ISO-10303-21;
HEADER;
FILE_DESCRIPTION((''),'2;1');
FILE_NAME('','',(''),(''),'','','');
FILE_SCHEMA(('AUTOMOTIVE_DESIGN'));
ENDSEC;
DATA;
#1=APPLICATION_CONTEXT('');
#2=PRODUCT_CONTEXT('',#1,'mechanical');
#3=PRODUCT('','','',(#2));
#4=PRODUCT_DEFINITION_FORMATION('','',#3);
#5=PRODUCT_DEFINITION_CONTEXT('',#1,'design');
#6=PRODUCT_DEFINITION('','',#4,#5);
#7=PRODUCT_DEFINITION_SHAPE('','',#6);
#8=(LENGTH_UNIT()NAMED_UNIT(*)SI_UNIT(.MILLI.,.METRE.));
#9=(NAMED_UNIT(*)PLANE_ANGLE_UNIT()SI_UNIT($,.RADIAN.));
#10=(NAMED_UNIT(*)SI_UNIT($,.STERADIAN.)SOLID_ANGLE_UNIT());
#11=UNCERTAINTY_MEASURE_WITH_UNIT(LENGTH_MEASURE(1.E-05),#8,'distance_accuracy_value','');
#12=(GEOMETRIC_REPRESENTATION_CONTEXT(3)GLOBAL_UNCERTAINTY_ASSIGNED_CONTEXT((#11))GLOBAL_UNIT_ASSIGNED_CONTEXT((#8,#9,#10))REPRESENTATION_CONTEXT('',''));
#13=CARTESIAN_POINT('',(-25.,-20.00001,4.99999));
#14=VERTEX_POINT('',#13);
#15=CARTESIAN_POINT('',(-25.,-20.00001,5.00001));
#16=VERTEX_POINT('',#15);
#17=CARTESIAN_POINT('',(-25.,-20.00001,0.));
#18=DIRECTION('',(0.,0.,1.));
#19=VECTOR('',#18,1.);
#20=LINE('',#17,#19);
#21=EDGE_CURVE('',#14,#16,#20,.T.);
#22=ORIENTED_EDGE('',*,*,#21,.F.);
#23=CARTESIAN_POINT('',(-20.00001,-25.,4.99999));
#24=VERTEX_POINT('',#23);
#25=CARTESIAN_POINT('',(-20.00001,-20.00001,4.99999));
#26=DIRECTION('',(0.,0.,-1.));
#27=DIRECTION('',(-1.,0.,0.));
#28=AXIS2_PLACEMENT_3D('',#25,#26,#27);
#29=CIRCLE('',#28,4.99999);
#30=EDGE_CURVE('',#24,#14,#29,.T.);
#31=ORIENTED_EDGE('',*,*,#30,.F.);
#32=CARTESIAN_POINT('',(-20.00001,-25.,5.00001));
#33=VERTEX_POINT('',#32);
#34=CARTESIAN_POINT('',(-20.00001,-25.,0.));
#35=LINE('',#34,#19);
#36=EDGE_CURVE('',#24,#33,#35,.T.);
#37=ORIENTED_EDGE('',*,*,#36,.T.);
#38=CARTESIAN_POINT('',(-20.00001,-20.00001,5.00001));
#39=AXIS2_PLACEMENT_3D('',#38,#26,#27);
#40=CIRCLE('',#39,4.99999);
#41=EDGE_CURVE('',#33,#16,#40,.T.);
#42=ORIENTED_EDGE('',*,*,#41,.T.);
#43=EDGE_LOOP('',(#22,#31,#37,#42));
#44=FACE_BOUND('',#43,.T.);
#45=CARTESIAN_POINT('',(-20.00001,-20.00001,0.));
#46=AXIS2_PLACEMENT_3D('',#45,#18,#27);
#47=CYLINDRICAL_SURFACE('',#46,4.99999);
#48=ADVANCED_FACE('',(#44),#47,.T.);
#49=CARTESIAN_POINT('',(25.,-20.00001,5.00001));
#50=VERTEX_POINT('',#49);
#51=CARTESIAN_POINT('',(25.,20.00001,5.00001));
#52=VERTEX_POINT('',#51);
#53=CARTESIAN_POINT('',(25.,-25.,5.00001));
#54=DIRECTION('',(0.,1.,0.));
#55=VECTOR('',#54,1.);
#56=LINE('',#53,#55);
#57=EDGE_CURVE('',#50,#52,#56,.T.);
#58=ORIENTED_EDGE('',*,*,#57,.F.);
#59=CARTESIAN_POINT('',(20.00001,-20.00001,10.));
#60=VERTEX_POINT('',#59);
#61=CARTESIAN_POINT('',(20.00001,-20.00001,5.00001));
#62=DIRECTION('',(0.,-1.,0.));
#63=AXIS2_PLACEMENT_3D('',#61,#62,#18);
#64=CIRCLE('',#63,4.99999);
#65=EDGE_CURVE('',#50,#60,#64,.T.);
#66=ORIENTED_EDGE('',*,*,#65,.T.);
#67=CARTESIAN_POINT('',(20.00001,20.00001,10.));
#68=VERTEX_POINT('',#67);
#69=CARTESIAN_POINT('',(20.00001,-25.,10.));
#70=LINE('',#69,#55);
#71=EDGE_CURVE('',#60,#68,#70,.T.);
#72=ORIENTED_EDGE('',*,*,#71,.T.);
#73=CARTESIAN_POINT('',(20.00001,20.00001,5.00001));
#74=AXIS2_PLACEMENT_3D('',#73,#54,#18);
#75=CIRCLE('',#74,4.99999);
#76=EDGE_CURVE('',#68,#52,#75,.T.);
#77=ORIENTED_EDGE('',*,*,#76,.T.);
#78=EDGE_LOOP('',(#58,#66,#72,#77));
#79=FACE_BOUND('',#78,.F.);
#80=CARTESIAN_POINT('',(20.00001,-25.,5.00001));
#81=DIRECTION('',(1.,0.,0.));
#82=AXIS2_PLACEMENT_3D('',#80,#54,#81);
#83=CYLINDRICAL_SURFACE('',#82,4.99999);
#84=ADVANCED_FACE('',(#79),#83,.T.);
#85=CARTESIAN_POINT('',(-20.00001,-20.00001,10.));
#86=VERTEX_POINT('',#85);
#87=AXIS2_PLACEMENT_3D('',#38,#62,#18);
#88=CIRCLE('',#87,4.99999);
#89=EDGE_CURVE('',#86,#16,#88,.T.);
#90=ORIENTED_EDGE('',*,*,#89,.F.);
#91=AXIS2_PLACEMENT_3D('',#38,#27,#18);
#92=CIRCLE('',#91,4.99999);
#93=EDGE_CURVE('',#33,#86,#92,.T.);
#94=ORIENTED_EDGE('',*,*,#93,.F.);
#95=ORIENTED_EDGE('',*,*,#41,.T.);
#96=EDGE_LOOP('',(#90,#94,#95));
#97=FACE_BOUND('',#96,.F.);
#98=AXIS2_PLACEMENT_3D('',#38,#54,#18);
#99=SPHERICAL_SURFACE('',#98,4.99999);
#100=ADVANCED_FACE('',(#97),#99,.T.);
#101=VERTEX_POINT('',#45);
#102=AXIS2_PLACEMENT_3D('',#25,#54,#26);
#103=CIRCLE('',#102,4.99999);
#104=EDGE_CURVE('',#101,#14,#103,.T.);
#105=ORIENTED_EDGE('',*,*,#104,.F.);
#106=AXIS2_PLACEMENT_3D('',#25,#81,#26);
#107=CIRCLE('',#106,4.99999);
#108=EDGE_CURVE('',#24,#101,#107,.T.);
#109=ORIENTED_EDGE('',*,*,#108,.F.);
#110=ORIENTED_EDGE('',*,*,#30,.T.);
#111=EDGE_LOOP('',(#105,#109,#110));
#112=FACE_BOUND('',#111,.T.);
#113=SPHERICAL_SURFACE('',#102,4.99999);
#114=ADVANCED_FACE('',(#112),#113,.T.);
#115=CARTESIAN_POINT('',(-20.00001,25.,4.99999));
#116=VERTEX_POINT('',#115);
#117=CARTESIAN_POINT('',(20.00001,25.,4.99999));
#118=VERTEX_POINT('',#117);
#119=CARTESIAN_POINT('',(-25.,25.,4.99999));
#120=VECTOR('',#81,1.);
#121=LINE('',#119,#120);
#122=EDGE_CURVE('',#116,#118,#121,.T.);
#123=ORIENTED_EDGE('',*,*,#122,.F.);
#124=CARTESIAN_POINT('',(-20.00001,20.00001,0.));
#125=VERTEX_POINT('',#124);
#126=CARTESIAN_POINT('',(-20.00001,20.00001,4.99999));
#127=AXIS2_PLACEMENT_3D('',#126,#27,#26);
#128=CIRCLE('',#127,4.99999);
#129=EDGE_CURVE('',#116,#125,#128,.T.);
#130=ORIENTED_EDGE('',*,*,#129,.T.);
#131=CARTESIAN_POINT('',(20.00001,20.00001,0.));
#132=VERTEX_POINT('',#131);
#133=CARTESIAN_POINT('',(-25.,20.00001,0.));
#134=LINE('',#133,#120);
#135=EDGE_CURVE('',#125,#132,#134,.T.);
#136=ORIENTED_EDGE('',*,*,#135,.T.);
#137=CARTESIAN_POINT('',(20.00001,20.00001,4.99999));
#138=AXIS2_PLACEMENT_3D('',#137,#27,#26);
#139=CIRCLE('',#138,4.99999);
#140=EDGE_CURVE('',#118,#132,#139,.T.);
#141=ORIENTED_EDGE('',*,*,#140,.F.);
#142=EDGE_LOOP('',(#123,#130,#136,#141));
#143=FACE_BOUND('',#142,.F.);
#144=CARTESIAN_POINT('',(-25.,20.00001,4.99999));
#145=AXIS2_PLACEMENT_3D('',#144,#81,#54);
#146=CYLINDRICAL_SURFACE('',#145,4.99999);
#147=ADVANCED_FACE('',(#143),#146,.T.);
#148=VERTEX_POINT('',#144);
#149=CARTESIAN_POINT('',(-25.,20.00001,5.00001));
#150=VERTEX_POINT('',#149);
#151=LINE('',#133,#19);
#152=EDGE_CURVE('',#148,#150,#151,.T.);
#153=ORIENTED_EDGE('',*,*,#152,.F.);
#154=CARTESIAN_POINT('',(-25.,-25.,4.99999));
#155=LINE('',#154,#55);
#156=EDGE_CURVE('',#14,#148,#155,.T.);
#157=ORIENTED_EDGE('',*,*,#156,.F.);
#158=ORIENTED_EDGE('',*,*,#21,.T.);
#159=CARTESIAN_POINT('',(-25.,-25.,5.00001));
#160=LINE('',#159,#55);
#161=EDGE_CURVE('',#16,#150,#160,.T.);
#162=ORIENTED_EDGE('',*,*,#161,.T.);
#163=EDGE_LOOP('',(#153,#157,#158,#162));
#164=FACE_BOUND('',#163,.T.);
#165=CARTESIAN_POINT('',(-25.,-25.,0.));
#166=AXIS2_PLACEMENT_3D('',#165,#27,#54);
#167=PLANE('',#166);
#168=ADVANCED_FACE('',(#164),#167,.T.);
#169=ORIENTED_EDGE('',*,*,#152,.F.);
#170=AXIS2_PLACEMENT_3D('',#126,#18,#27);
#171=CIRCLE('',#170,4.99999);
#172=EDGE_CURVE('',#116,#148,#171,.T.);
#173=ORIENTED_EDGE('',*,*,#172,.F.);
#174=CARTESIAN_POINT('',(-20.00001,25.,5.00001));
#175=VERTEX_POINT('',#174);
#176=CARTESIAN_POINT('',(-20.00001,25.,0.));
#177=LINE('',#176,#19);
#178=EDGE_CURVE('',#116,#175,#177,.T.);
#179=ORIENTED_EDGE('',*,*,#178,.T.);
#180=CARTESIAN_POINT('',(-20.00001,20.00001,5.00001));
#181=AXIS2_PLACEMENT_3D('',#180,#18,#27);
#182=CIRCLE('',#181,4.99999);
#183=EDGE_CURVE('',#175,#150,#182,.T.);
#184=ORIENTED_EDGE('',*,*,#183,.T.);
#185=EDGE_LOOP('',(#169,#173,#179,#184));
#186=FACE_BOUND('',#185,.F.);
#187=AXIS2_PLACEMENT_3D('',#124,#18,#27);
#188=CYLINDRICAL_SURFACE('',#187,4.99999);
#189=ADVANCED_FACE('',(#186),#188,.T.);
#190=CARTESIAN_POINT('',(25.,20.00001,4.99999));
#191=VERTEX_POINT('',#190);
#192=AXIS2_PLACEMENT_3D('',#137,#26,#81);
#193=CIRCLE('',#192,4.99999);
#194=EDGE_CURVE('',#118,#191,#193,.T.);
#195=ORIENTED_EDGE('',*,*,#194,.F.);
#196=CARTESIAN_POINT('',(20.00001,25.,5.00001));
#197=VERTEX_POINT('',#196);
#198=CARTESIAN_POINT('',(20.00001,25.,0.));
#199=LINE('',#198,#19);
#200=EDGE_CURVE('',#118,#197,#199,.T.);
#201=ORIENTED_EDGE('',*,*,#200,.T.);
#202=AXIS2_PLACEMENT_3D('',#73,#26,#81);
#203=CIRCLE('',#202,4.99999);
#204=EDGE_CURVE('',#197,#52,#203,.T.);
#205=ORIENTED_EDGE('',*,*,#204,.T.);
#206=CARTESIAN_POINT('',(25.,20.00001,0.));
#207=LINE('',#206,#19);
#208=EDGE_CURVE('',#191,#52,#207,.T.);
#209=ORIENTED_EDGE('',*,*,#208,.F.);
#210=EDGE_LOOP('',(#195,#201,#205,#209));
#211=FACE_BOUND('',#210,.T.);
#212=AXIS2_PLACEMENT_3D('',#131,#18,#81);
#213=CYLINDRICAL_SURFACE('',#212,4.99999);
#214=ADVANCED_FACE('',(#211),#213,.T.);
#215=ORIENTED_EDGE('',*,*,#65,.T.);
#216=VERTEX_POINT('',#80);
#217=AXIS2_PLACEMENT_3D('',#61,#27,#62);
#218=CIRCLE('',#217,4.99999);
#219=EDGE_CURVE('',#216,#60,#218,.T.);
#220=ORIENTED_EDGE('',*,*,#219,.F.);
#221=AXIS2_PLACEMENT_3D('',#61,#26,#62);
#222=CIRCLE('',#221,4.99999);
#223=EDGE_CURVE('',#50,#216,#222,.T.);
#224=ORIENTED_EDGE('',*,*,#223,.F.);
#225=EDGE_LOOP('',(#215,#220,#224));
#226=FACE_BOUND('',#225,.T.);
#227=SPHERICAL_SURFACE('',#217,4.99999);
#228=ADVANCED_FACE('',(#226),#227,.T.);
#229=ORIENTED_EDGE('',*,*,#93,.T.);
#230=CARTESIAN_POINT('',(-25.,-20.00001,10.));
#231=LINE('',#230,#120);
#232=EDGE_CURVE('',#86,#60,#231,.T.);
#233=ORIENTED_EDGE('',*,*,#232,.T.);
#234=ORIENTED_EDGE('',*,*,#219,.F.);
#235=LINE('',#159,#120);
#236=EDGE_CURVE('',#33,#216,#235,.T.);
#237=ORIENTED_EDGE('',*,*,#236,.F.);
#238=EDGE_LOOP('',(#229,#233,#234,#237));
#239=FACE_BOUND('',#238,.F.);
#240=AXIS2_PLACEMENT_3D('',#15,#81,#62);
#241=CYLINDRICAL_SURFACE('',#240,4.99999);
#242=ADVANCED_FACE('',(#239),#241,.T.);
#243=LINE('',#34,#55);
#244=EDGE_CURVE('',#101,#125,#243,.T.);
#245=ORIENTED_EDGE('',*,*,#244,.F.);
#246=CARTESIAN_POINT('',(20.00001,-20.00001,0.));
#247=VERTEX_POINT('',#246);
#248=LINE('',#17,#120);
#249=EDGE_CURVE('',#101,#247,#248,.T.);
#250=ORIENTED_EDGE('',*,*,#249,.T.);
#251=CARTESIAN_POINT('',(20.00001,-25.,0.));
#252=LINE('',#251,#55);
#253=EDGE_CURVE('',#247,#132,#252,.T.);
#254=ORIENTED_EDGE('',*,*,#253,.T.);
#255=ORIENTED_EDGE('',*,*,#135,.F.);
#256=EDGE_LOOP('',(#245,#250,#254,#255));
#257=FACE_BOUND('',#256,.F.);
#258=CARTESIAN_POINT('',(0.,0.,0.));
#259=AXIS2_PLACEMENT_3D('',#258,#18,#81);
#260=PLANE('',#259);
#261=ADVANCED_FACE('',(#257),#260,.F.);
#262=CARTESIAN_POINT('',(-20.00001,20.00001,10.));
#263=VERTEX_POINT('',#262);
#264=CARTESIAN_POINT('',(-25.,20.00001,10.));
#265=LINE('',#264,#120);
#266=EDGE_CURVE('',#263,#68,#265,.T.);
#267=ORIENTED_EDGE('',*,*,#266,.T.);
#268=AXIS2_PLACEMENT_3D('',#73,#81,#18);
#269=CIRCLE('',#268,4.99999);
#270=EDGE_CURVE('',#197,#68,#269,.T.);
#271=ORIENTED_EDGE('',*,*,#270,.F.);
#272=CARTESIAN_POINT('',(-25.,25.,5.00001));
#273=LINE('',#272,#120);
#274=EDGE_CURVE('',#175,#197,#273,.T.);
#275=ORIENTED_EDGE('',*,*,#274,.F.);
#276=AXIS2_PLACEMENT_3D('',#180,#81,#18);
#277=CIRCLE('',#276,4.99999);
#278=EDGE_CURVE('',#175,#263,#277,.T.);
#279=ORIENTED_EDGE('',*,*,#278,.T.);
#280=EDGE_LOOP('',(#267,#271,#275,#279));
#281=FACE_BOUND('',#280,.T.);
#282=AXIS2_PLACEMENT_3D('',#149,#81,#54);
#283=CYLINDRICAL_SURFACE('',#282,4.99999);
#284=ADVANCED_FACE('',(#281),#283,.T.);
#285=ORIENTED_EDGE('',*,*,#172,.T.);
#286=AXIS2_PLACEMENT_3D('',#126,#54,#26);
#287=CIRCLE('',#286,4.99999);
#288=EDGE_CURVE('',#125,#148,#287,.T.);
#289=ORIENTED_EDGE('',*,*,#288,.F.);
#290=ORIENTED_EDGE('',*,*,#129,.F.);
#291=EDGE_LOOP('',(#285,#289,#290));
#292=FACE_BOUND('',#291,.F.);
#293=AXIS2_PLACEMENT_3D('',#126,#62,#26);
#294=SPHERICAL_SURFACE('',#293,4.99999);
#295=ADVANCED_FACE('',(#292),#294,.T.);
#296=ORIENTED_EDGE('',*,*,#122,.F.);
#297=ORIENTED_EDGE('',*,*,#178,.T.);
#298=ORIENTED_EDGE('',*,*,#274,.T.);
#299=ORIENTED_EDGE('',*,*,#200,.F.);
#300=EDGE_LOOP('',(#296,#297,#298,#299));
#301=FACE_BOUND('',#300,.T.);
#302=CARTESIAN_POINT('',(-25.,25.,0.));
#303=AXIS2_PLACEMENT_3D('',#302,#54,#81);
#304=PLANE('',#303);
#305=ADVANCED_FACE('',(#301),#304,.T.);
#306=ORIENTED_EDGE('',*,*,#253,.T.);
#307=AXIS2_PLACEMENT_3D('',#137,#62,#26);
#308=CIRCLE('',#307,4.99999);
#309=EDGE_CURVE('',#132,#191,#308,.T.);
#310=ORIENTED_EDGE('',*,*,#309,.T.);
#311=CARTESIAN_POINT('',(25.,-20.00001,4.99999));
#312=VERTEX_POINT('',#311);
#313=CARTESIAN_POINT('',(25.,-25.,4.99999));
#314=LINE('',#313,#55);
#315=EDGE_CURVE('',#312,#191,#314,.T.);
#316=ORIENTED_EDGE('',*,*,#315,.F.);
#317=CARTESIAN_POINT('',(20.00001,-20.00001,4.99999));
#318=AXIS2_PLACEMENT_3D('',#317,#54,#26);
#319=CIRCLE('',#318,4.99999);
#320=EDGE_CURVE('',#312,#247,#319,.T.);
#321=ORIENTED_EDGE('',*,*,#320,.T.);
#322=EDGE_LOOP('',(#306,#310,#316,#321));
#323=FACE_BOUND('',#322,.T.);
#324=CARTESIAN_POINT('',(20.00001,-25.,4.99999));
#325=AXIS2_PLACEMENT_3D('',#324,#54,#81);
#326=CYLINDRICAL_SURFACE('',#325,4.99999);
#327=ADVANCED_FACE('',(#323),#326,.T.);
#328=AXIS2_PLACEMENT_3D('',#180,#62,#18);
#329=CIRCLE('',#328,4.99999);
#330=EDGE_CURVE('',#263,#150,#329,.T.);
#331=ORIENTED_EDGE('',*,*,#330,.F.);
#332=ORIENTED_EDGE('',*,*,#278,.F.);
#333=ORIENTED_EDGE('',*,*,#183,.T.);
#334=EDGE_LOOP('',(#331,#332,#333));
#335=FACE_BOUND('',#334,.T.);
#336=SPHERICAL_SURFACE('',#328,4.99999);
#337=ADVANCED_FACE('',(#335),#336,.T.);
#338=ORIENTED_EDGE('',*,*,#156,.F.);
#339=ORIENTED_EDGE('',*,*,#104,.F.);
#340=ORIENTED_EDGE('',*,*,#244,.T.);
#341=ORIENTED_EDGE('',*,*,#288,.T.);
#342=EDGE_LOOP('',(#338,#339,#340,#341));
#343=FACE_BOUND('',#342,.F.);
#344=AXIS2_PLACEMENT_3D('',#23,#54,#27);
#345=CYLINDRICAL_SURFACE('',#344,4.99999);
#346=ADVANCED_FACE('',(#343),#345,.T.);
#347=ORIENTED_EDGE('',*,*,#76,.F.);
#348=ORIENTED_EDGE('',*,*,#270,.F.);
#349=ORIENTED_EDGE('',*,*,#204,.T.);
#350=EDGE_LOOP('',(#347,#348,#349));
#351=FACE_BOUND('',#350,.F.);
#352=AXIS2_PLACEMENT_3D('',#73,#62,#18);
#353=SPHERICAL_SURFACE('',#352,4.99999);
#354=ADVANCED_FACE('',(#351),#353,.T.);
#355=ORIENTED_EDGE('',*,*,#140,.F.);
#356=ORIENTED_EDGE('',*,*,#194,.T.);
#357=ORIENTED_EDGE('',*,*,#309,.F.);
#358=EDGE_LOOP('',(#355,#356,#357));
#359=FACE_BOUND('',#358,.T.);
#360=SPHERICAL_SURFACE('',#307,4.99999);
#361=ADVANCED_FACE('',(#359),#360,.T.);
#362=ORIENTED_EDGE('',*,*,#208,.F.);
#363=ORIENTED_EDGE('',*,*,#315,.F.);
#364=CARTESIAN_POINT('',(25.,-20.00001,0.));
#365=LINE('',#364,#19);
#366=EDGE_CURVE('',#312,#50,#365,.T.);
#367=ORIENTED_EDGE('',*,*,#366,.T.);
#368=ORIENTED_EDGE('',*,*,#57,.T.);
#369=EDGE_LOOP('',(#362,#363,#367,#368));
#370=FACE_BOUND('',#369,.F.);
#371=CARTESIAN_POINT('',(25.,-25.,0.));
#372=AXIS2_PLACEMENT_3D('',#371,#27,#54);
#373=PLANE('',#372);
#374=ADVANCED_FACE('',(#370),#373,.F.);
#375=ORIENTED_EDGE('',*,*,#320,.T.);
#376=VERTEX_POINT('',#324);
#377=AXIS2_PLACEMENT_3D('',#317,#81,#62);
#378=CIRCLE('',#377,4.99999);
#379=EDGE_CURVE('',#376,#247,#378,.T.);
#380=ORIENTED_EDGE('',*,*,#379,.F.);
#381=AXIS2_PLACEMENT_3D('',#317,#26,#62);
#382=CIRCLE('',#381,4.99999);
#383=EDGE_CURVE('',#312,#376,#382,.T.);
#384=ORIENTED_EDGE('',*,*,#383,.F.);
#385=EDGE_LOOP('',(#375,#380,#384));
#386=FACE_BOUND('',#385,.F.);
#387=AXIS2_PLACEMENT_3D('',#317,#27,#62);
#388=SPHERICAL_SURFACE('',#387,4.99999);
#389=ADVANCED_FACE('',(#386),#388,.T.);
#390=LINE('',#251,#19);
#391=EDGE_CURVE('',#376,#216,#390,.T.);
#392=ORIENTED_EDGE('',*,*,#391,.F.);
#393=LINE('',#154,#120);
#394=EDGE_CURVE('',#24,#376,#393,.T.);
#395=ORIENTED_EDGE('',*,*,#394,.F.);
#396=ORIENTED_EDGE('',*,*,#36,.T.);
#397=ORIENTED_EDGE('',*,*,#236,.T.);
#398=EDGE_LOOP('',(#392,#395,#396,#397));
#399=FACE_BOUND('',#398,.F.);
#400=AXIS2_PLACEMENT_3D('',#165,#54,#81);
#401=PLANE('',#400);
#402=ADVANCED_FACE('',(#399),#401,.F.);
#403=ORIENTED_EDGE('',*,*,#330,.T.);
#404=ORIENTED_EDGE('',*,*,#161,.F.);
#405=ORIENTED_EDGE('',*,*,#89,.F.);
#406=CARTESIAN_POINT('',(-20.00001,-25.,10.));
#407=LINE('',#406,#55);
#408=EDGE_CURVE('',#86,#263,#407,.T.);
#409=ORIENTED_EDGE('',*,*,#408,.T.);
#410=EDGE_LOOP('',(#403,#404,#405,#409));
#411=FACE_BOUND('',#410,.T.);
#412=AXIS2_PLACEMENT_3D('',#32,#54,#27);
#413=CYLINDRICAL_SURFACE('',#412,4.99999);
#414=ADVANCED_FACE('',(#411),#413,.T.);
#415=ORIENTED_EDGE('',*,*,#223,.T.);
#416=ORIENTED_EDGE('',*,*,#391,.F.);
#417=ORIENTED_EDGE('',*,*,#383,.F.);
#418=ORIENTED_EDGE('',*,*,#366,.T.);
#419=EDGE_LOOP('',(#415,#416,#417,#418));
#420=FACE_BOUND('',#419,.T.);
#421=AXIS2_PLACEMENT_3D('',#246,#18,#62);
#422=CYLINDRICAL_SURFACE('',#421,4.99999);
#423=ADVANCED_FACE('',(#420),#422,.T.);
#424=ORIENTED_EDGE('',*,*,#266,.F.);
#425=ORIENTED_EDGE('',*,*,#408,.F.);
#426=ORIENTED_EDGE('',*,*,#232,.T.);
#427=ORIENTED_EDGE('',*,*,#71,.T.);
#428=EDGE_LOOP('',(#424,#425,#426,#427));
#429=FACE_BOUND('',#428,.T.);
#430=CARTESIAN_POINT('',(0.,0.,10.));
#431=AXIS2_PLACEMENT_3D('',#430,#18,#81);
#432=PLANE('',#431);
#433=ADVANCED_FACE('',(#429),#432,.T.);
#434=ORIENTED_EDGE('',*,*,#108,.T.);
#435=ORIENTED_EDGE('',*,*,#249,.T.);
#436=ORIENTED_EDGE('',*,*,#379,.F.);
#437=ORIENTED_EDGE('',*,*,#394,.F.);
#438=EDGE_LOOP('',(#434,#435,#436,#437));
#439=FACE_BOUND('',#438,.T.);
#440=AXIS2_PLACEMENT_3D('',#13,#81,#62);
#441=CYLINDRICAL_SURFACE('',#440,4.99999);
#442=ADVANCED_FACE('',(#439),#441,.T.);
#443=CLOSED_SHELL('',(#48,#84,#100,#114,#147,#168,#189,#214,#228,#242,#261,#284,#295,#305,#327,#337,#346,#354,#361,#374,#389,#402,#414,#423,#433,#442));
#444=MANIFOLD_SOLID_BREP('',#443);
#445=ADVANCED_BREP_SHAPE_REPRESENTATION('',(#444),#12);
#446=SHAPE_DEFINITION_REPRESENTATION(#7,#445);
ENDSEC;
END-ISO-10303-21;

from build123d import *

# Parameters (mm, degrees)
F0_W     = 50
F0_H     = 50
F1_DEPTH = 10
F2_R     = 4.99999


# Not quite as in the source:
# - a fillet or chamfer is up to 0.001 mm smaller than in the source, because OpenCascade refuses the exact size


with BuildPart() as f1:
    # F0 (on Top) → F1 (new body)
    with BuildSketch(Plane.XY):
        Rectangle(F0_W, F0_H)
    extrude(amount=F1_DEPTH)

    # F2 (radius 5 in the source; OpenCascade refuses exactly that, so slightly less here)
    f2_edges = [f1.edges().sort_by_distance(p)[0] for p in [
        (-25, 0, 10),
        (-25, 0, 0),
        (0, -25, 0),
        (0, -25, 10),
        (-25, -25, 5),
        (25, -25, 5),
        (25, 0, 10),
        (25, 0, 0),
        (0, 25, 0),
        (0, 25, 10),
        (25, 25, 5),
        (-25, 25, 5),
    ]]
    fillet(f2_edges, radius=F2_R)


solid = f1.part
